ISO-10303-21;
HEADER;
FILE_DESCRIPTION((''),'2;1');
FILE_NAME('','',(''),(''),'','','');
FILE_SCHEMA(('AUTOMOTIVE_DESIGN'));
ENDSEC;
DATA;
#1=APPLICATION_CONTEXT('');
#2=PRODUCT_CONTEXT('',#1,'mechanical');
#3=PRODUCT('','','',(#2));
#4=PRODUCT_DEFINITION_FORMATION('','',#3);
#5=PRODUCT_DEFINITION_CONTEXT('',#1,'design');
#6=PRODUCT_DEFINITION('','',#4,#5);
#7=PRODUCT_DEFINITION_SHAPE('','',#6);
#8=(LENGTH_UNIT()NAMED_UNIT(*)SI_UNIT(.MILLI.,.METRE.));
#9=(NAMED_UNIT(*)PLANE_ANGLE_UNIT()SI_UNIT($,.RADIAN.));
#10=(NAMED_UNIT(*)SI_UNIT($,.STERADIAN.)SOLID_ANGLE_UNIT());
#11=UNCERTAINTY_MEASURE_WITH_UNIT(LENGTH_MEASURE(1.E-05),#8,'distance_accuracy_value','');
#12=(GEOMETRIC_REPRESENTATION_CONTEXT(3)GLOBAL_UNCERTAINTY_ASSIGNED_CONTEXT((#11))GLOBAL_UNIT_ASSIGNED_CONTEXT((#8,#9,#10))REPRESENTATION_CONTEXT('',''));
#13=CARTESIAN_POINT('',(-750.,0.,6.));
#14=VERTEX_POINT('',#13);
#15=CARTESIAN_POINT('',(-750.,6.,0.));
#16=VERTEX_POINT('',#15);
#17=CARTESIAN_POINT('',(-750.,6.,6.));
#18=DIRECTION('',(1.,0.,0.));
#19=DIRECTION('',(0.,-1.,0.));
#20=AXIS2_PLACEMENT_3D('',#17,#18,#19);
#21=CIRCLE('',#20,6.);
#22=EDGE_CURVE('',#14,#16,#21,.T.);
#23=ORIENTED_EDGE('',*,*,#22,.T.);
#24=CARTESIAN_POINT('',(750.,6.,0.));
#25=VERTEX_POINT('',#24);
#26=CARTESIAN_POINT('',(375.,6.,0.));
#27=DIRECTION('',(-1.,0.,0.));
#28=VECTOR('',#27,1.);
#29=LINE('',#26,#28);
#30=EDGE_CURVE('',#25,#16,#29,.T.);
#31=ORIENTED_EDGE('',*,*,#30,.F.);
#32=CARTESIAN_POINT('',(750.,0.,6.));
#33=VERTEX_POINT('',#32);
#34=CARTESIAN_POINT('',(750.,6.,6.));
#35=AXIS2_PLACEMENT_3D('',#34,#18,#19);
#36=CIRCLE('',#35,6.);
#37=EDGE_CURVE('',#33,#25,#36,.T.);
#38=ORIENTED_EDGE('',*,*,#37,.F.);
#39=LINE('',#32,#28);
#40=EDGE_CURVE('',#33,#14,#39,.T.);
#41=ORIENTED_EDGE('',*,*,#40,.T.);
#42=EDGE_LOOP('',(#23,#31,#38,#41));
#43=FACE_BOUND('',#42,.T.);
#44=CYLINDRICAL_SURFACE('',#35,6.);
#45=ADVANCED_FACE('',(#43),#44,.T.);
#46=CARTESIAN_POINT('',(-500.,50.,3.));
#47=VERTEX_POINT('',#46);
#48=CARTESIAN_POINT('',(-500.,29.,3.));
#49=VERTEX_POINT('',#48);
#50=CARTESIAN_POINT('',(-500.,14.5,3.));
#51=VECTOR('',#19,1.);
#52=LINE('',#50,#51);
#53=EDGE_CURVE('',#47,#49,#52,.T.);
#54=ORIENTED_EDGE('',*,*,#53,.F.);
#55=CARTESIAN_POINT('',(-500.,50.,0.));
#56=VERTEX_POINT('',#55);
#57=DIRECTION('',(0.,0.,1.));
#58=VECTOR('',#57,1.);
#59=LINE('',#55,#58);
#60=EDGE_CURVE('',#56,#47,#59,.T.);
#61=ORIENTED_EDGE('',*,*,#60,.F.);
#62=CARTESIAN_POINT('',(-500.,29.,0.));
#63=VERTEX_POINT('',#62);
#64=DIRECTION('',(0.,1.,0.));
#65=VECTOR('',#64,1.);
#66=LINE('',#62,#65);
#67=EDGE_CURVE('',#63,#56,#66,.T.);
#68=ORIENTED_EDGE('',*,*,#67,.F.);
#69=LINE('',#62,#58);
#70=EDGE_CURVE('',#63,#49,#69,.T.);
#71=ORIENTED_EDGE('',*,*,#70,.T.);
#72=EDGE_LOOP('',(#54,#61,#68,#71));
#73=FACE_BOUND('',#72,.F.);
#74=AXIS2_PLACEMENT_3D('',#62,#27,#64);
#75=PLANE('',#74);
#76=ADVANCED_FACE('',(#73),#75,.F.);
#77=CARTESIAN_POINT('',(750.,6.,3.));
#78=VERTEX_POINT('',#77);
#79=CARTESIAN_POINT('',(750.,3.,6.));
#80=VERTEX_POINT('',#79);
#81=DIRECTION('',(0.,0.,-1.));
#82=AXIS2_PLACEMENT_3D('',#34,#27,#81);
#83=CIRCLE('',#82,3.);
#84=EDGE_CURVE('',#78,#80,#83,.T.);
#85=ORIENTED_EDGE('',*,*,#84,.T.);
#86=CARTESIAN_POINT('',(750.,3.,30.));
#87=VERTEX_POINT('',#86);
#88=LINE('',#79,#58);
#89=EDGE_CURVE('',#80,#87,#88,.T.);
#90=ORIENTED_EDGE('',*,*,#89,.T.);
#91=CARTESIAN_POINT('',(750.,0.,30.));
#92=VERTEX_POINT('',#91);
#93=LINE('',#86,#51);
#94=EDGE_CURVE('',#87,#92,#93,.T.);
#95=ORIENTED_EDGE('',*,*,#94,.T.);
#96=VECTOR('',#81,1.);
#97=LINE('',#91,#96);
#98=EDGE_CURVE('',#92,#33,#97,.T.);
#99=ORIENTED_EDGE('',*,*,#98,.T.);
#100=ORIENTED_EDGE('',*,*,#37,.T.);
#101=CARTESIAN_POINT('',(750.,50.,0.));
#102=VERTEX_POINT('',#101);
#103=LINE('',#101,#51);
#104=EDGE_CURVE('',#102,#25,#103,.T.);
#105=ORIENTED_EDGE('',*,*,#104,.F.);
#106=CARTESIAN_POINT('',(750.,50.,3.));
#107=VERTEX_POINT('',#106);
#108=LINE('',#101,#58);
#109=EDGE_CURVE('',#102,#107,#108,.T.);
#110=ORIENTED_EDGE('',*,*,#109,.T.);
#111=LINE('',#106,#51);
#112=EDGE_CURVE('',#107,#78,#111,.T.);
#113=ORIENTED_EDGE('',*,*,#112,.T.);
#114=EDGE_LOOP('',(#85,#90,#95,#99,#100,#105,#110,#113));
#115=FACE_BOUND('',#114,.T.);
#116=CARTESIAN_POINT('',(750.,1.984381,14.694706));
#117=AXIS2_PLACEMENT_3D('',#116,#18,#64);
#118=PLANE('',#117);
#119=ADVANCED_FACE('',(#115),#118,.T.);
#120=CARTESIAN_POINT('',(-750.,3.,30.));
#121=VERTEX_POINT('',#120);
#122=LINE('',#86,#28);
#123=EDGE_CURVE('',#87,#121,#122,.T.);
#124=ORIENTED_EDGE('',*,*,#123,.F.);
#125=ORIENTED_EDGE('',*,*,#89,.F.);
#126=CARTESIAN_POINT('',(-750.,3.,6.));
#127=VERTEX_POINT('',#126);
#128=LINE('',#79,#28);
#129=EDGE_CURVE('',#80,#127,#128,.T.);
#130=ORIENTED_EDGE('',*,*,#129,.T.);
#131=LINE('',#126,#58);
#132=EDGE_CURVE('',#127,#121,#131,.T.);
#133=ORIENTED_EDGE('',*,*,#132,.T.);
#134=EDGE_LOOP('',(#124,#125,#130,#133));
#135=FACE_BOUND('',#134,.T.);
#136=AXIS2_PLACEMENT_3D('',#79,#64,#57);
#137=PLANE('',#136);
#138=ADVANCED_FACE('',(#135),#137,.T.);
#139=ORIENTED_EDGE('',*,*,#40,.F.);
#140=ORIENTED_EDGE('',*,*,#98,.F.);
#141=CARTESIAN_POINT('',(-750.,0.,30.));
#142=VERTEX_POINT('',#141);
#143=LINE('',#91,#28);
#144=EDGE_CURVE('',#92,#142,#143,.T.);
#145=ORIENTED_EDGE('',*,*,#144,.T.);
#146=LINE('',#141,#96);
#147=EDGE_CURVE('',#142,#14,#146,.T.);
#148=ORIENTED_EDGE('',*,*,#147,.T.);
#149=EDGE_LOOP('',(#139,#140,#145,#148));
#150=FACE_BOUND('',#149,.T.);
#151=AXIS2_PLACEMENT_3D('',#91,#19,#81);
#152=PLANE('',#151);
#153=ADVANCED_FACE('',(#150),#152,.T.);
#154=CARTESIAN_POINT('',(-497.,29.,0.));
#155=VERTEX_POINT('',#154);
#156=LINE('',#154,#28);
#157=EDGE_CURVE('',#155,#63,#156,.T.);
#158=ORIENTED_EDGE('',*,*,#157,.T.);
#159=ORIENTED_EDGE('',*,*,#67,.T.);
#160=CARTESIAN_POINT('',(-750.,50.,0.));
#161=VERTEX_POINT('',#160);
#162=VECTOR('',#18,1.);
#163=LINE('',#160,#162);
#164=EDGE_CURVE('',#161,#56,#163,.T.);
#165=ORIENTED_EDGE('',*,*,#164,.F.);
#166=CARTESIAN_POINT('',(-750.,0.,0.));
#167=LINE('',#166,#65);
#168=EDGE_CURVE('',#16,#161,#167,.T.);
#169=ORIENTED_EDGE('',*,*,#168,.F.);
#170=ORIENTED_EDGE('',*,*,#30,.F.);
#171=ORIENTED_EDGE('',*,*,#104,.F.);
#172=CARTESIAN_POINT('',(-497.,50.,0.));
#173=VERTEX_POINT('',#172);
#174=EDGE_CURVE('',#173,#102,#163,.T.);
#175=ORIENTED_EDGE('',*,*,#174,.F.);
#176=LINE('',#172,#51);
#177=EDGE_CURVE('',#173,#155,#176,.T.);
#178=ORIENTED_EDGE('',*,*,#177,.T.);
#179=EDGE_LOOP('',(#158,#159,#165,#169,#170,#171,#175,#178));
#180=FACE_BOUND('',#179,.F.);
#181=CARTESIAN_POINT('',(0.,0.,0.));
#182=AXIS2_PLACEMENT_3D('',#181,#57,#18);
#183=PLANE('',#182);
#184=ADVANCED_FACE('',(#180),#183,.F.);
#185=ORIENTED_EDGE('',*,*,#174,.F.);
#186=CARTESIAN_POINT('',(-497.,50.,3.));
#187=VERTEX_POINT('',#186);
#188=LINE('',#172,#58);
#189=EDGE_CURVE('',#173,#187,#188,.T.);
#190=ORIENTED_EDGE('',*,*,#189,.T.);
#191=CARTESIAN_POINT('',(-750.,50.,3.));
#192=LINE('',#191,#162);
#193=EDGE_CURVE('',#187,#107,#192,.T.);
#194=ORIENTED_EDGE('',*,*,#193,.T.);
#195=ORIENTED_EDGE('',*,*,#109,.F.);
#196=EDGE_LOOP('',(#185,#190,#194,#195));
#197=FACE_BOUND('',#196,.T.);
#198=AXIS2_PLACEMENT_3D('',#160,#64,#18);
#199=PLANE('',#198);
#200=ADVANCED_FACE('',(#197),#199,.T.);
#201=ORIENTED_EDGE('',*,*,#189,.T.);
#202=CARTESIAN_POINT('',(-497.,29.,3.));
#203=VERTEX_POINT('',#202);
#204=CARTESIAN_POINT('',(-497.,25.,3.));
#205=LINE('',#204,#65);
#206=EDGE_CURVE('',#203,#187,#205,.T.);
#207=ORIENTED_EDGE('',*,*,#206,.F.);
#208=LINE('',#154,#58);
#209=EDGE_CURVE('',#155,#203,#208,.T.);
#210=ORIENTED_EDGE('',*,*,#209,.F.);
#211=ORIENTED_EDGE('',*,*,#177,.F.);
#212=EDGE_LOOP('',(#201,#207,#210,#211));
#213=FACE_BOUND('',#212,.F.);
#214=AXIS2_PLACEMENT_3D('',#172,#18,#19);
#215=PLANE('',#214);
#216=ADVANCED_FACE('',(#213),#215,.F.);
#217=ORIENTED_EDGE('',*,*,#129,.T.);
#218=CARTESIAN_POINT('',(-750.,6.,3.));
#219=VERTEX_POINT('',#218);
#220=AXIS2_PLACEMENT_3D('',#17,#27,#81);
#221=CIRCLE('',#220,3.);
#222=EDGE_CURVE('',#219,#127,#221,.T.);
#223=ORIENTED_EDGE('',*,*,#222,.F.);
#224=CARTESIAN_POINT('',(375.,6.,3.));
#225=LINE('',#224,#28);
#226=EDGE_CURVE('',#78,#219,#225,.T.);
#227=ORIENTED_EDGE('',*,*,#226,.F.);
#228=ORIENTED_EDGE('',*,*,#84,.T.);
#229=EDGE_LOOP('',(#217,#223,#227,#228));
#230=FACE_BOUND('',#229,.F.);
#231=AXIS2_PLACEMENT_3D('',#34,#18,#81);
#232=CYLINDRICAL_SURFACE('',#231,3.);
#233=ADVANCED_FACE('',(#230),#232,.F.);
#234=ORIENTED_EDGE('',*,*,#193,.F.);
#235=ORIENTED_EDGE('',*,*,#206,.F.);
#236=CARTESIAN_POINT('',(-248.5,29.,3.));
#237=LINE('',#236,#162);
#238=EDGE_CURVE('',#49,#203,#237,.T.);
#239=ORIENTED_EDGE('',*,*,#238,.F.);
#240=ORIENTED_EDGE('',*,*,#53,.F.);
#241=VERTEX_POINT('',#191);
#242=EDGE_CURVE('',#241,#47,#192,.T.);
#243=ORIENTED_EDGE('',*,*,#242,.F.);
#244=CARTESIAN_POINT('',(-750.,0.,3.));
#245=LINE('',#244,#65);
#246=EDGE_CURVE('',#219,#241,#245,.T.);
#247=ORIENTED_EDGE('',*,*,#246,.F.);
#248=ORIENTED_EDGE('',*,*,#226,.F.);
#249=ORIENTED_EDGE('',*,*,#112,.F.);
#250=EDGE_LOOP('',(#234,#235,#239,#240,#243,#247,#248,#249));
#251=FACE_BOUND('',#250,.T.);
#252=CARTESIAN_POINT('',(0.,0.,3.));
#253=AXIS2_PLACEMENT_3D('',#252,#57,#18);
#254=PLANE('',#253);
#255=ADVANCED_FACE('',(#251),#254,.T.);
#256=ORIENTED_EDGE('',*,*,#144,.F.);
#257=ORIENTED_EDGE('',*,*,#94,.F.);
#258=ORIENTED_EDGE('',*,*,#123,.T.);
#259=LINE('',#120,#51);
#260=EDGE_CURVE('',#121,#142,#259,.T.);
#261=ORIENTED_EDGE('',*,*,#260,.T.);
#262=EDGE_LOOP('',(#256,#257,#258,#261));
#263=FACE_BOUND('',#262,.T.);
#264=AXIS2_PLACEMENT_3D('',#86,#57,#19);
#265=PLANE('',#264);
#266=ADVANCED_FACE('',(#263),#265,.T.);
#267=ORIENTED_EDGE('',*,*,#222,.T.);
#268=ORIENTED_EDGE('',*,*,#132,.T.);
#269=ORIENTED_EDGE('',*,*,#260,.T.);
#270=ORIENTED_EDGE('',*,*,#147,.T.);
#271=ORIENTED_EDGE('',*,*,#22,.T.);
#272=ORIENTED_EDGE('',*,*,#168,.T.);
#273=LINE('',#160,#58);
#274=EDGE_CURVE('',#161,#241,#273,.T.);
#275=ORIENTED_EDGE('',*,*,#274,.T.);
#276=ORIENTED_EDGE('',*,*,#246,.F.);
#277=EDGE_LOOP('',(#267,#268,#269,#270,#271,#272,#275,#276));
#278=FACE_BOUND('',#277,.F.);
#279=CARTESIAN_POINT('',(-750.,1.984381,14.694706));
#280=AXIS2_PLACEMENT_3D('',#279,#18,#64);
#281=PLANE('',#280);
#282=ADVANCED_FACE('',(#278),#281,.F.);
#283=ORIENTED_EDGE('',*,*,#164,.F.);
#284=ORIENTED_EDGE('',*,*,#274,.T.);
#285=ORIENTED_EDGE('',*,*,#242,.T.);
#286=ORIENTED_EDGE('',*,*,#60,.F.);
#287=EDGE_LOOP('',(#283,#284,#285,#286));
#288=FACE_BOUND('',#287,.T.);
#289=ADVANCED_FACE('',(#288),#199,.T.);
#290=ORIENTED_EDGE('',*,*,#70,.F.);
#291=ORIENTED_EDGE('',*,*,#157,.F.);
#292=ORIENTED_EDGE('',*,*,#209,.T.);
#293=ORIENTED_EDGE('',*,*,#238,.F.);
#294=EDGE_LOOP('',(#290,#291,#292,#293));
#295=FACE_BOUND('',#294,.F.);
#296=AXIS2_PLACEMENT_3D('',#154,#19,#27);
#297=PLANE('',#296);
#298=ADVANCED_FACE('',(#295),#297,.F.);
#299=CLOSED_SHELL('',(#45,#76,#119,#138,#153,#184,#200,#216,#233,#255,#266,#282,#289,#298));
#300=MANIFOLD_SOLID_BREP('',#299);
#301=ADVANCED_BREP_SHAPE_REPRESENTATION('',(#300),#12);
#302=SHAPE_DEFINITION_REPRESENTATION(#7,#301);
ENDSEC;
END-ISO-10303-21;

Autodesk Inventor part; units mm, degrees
ref_plane "YZ Plane" through (0, 0, 0) normal (1, 0, 0) x (0, 1, 0)
ref_plane "XZ Plane" through (0, 0, 0) normal (0, 1, 0) x (-1, 0, 0)
ref_plane "XY Plane" through (0, 0, 0) normal (0, 0, 1) x (1, 0, 0)
sketch "Sketch1" plane through (0, 0, 0) normal (0, 0, 1) x (1, 0, 0)
  line L0 (-750, 50) -> (750, 50)
  line L1 (750, 50) -> (750, 0)
  line L2 (750, 0) -> (-750, 0)
  line L3 (-750, 0) -> (-750, 50)
  point P0 (0, 0)
  point P1 (0, 0)
  dimension "d0" = 1500
  dimension "d1" = 50
extrude "Plate1" add sketch "Sketch1" along normal blind 3
sketch "Sketch2" plane through (750, 3, 0) normal (0, -1, 0) x (1, 0, 0)
  line L0 (-1500, 0) -> (0, 0)
  line L1 (0, 0) -> (0, 30)
  line L2 (0, 30) -> (-1500, 30)
  line L3 (-1500, 30) -> (-1500, 0)
edge flange "Flange1" height 30 angle 90 thickness 3 bend radius 3 thickness toward (0, -1, 0) relief tear relief width 3 relief depth 1.5 edges at (0, 0, 3) wall of the first edge with corners at (-750, 3, 0) (750, 3, 0) (750, 3, 30) (-750, 3, 30)
bend "Bend1"
corner "Corner1"
sketch "Sketch5" plane through (0, 0, 0) normal (0, 0, -1) x (-1, 0, 0)
  line L0 (750, 50) -> (-750, 50) projected
  line L1 (497, 50) -> (497, 29)
  line L2 (497, 29) -> (500, 29)
  line L3 (500, 29) -> (500, 50)
  point P0 (0, 0)
  dimension "d17" = 21
  dimension "d18" = 3
  dimension "d19" = 250
extrude "Extrusion1" cut sketch "Sketch5" against normal through all
equation "\"d18\" = Thickness"
equation "\"d2\" = Thickness"
equation "\"d3\" = BendReliefWidth"
equation "\"d4\" = BendReliefDepth"
equation "\"d5\" = MinimumRemnant"
equation "\"d6\" = TransitionRadius"
equation "\"d9\" = BendRadius"
equation "\"d10\" = CornerReliefSize"
equation "\"d11\" = GapSize"
equation "\"d12\" = JacobiRadiusSize"
equation "\"BendRadius\" = Thickness"
equation "\"BendReliefWidth\" = Thickness"
equation "\"BendReliefDepth\" = 0.5 * Thickness"
equation "\"CornerReliefSize\" = 4 * Thickness"
equation "\"MinimumRemnant\" = 2 * Thickness"
equation "\"TransitionRadius\" = BendRadius"
equation "\"JacobiRadiusSize\" = BendRadius"
equation "\"GapSize\" = Thickness"
equation "\"Thickness\" = 3"
properties part number "МОО 050 стрингер спина 1"
